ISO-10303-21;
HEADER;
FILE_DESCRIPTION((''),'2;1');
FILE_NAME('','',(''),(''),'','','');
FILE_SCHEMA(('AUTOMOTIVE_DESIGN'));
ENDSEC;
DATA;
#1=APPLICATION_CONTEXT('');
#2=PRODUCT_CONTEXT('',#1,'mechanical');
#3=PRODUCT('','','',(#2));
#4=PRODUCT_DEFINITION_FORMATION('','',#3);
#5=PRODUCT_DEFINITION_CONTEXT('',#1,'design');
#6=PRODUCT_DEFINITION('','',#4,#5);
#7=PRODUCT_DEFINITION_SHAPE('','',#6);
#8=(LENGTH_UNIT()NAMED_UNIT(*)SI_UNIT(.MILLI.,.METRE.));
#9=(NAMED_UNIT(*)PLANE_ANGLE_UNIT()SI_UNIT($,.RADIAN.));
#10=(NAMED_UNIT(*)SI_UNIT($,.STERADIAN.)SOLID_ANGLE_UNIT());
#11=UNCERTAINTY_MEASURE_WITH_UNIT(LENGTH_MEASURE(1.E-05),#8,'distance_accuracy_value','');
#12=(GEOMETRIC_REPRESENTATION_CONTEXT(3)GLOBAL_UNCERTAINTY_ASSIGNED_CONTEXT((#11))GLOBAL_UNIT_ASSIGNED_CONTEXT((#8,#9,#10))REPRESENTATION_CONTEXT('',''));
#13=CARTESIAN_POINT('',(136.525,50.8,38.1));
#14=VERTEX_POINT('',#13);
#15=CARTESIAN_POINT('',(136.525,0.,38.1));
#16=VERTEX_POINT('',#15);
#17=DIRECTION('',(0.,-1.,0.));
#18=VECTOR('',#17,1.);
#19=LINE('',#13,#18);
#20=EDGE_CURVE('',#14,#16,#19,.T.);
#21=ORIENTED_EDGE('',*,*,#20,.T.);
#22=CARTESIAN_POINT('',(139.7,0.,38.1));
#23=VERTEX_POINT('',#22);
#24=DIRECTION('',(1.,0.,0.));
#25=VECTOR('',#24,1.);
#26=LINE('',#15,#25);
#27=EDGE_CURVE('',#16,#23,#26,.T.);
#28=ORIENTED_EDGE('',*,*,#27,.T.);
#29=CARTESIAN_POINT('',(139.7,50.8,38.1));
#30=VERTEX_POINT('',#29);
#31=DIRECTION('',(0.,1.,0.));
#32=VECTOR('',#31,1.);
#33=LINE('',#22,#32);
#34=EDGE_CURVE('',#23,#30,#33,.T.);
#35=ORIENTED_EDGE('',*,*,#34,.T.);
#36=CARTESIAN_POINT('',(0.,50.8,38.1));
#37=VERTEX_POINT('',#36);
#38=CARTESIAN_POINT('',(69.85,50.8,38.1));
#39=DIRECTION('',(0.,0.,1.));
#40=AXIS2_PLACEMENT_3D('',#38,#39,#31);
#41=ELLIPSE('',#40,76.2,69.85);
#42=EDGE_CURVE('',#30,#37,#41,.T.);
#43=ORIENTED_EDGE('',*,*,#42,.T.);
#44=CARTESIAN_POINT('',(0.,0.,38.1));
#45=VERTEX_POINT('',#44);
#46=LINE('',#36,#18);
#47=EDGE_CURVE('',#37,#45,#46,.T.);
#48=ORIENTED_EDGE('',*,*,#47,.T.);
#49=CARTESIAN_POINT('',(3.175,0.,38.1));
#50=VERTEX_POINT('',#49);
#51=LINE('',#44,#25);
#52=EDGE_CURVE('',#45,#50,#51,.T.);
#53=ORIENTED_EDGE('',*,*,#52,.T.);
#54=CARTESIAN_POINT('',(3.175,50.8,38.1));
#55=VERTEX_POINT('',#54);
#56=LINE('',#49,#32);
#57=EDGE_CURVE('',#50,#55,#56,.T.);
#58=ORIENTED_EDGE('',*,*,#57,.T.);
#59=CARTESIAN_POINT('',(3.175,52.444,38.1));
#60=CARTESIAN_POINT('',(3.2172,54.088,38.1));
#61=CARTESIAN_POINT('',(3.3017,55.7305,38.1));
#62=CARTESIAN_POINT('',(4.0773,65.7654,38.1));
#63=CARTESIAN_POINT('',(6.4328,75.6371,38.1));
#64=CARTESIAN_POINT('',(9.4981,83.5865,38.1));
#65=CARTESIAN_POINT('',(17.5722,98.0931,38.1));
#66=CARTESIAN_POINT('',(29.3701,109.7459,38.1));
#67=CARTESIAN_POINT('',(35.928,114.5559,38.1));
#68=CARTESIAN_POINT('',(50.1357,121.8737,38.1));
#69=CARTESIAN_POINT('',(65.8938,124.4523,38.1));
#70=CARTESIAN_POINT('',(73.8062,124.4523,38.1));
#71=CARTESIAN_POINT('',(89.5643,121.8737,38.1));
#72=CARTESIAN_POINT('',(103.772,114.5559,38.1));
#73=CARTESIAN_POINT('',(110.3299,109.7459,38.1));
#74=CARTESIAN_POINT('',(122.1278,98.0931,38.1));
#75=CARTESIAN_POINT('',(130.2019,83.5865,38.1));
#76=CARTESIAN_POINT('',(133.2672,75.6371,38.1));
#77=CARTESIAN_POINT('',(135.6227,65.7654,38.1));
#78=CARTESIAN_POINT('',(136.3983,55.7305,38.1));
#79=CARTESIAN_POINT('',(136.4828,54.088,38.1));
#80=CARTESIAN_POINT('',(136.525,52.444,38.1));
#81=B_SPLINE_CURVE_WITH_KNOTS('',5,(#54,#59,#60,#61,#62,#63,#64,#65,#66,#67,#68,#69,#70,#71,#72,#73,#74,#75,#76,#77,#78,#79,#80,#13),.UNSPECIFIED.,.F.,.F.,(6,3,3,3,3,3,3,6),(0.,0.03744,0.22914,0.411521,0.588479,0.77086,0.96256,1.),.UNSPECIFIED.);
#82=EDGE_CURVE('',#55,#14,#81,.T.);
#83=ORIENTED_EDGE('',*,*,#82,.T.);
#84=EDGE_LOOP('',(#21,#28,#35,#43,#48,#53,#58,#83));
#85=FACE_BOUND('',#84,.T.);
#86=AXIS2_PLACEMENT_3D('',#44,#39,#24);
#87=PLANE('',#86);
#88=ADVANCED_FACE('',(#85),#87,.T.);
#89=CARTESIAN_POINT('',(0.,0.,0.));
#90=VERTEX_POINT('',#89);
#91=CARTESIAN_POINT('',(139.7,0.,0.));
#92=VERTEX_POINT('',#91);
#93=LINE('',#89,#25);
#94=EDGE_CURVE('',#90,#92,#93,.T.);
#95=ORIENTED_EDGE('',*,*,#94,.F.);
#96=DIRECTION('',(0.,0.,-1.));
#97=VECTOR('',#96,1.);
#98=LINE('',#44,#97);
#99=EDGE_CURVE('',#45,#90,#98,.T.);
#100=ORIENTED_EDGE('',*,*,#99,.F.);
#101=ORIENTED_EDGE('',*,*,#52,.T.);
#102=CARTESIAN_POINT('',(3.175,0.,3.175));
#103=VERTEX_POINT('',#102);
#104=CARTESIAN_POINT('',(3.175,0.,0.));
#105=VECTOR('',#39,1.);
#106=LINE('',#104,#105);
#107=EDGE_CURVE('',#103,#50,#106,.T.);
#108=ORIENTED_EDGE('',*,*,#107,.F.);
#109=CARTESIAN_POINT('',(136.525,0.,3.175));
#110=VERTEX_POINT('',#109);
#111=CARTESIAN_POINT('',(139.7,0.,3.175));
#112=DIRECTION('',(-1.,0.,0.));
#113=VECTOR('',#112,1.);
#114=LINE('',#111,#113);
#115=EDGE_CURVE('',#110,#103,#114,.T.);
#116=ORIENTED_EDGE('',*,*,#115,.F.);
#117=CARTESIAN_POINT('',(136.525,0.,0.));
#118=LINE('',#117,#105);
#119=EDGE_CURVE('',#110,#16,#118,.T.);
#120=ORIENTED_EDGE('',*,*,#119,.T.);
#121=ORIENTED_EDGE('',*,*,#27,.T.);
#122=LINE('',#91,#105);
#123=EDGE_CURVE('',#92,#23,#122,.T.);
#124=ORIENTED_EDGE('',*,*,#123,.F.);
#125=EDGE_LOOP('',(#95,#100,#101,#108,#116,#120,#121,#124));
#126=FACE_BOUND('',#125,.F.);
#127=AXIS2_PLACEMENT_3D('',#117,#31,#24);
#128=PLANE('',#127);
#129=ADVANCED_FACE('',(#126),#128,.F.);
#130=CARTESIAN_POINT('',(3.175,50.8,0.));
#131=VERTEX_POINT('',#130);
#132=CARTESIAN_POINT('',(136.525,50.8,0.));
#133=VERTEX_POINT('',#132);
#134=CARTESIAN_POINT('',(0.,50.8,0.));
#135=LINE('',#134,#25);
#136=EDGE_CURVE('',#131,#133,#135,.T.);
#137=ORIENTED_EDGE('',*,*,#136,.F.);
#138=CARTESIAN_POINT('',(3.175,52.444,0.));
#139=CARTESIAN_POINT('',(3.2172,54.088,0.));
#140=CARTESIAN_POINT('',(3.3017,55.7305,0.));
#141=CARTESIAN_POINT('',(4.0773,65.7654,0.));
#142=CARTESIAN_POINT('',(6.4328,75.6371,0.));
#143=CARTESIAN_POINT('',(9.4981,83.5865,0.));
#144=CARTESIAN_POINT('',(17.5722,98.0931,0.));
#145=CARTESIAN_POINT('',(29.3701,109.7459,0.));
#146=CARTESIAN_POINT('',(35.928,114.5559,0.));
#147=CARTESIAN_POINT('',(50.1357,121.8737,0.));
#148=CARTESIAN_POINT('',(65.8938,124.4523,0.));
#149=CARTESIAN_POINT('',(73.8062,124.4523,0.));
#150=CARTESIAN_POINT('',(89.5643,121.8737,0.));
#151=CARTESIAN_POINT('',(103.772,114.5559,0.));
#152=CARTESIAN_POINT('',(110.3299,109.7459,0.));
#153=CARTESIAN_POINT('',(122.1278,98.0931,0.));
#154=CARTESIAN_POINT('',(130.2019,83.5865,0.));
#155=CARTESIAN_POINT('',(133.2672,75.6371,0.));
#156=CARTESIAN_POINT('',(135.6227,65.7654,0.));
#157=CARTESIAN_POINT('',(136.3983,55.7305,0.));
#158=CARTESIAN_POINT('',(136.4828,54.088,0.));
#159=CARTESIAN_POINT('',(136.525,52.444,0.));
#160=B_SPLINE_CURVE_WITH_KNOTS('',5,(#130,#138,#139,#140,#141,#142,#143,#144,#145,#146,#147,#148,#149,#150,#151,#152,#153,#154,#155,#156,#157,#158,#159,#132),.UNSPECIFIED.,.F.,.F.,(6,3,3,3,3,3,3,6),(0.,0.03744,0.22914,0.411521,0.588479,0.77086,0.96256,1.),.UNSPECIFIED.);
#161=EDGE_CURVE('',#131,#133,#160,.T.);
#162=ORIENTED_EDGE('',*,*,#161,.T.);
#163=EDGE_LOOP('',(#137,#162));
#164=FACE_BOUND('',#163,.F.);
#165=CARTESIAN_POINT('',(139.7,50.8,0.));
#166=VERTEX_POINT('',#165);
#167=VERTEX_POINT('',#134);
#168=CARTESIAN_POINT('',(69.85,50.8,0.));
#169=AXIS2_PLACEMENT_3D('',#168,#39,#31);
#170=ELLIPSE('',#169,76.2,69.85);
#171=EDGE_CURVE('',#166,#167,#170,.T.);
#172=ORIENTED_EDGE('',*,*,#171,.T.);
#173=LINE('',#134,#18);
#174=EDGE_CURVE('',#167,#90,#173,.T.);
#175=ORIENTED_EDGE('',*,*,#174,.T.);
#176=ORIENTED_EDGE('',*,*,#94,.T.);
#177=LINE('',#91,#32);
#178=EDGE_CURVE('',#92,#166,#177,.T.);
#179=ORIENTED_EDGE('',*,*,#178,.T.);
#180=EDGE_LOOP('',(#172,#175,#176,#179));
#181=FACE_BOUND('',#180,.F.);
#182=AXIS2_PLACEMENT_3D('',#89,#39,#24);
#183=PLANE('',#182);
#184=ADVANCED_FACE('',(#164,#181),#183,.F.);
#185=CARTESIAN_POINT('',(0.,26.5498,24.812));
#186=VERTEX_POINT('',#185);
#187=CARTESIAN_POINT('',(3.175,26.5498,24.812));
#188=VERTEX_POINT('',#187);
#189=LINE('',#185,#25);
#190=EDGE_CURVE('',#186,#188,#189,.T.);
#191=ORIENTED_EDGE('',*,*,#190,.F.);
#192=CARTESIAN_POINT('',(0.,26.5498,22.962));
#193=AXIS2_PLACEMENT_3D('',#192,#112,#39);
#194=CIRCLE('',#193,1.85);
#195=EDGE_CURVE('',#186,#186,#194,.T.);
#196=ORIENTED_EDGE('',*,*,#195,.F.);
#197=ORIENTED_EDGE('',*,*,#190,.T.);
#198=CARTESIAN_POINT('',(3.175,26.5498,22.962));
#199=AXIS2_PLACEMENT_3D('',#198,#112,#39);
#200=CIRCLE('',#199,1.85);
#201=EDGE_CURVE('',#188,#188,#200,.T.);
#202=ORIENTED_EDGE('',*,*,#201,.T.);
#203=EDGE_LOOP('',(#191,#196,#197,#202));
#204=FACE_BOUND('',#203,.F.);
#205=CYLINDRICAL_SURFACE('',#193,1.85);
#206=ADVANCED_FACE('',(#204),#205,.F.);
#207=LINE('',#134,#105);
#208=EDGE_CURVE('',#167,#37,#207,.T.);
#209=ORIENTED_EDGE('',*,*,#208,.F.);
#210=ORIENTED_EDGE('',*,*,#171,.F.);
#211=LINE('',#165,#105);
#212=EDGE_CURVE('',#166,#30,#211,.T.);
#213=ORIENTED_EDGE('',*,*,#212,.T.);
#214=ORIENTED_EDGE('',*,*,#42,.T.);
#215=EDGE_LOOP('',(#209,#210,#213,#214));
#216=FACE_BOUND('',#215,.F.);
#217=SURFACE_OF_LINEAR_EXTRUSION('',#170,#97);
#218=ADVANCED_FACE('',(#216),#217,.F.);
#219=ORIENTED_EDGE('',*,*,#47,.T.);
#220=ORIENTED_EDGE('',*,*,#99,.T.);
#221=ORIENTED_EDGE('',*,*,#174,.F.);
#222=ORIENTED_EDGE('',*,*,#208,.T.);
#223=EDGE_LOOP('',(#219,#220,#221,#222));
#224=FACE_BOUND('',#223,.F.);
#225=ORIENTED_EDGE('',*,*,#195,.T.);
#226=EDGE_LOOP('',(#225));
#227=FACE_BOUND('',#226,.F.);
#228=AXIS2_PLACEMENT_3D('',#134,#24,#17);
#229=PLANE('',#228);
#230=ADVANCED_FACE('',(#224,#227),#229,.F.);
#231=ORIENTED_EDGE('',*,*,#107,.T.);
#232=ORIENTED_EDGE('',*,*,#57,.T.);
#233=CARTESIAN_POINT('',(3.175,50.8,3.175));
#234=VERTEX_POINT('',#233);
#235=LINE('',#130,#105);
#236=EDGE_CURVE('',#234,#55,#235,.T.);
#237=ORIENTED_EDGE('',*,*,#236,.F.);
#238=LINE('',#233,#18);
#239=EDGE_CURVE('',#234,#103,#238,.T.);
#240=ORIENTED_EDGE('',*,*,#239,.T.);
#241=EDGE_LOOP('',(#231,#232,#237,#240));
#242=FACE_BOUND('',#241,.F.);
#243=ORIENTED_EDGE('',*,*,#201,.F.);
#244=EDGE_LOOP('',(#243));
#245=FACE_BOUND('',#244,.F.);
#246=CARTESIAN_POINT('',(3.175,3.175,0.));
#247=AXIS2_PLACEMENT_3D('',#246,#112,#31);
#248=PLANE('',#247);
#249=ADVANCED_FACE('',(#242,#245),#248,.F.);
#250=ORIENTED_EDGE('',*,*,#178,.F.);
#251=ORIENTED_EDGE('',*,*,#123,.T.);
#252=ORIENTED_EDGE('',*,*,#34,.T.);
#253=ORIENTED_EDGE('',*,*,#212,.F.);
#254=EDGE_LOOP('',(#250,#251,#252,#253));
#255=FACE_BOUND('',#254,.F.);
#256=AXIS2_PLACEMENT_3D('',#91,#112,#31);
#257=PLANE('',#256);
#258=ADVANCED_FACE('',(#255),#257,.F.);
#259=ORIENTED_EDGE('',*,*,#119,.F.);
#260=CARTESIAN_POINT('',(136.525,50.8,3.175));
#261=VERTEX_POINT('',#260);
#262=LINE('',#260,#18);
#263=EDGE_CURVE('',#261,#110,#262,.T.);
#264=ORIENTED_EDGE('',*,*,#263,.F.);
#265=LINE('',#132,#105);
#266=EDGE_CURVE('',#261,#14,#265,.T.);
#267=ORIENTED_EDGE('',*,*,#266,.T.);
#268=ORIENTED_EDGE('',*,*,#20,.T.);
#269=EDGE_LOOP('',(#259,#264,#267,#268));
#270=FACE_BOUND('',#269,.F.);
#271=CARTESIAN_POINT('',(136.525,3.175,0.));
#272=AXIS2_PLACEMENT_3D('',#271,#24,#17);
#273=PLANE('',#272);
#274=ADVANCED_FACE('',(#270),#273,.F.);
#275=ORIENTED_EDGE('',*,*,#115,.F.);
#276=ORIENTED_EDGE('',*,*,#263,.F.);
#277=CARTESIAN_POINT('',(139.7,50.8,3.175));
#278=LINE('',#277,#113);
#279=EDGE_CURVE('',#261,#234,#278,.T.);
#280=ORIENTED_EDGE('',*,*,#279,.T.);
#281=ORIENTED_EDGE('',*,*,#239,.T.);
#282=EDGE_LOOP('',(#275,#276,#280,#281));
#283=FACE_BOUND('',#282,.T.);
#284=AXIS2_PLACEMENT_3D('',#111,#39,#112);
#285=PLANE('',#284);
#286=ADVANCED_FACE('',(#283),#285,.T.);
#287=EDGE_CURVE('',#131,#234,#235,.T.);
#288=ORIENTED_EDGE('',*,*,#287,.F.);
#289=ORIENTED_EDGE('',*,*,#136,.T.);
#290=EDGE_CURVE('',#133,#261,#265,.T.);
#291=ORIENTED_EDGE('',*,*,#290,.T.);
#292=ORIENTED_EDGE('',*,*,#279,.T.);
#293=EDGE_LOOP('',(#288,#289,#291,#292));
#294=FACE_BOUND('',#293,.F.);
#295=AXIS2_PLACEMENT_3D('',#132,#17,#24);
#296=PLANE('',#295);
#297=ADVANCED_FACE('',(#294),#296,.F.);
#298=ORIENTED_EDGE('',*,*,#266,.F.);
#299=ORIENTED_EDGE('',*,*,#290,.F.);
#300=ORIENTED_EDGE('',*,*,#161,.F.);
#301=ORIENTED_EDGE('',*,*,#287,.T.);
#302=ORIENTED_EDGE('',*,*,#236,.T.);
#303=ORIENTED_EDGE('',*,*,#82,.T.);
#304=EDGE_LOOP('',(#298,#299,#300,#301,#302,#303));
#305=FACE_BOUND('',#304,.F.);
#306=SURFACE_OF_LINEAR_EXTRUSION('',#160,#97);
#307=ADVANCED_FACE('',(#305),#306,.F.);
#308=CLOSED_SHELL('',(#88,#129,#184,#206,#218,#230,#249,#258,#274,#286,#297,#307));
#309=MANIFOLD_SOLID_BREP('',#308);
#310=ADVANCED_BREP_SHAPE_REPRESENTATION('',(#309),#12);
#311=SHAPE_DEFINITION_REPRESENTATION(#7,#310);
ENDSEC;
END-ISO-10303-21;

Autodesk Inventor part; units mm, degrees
ref_plane "YZ Plane" through (0, 0, 0) normal (1, 0, 0) x (0, 1, 0)
ref_plane "XZ Plane" through (0, 0, 0) normal (0, 1, 0) x (-1, 0, 0)
sketch "Sketch1" plane through (0, 0, 0) normal (0, 0, 1) x (1, 0, 0)
  line L0 (139.7, 0) -> (139.7, 50.8)
  line L1 (0, 50.8) -> (0, 0)
  ellipse E0 centre (69.85, 50.8) end of major axis (139.7, 50.8) minor radius 76.2 (139.7, 50.8) -> (0, 50.8) ccw
  line L2 (136.525, 50.8) -> (136.525, 3.175)
  line L3 (3.175, 3.175) -> (3.175, 50.8)
  line L4 (3.175, 3.175) -> (3.175, 0)
  line L5 (136.525, 3.175) -> (136.525, 0)
  line L6 (0, 0) -> (3.175, 0)
  line L7 (136.525, 0) -> (139.7, 0)
  spline S0 degree 5 poles (3.175, 50.8) (3.175, 52.444) (3.2172, 54.088) (3.3017, 55.7305) (4.0773, 65.7654) (6.4328, 75.6371) (9.4981, 83.5865) (17.5722, 98.0931) (29.3701, 109.7459) (35.928, 114.5559) (50.1357, 121.8737) (65.8938, 124.4523) (73.8062, 124.4523) (89.5643, 121.8737) (103.772, 114.5559) (110.3299, 109.7459) (122.1278, 98.0931) (130.2019, 83.5865) (133.2672, 75.6371) (135.6227, 65.7654) (136.3983, 55.7305) (136.4828, 54.088) (136.525, 52.444) (136.525, 50.8) knots 0 0 0 0 0 0 0.03744 0.03744 0.03744 0.22914 0.22914 0.22914 0.411521 0.411521 0.411521 0.588479 0.588479 0.588479 0.77086 0.77086 0.77086 0.96256 0.96256 0.96256 1 1 1 1 1 1
  dimension "d0" = 139.7
  dimension "d1" = 50.8
extrude "Extrusion1" add sketch "Sketch1" along normal blind 38.1
ref_plane "Work Plane1" through (136.525, 0, 0) normal (0, -1, 0) x (1, 0, 0)
sketch "Sketch2" plane through (136.525, 0, 0) normal (0, -1, 0) x (1, 0, 0)
  line L0 (-136.525, 0) -> (3.175, 0)
  line L1 (3.175, 0) -> (3.175, 3.175)
  line L2 (3.175, 3.175) -> (-136.525, 3.175)
  line L3 (-136.525, 3.175) -> (-136.525, 0)
  dimension "d7" = 139.7
  dimension "d8" = 3.175
extrude "Extrusion2" add sketch "Sketch2" against normal blind 50.8
sketch "Sketch3" plane through (0, 0, 38.1) normal (-1, 0, 0) x (0, 0, 1)
  circle A0 centre (-15.138, 26.5498) radius 1.85
  point P0 (-38.1, 0)
  dimension "d11" = 3.7
extrude "Extrusion3" cut sketch "Sketch3" against normal blind 50.8
properties part number "Bucket Flap" material "Polycarbonate, Clear"
